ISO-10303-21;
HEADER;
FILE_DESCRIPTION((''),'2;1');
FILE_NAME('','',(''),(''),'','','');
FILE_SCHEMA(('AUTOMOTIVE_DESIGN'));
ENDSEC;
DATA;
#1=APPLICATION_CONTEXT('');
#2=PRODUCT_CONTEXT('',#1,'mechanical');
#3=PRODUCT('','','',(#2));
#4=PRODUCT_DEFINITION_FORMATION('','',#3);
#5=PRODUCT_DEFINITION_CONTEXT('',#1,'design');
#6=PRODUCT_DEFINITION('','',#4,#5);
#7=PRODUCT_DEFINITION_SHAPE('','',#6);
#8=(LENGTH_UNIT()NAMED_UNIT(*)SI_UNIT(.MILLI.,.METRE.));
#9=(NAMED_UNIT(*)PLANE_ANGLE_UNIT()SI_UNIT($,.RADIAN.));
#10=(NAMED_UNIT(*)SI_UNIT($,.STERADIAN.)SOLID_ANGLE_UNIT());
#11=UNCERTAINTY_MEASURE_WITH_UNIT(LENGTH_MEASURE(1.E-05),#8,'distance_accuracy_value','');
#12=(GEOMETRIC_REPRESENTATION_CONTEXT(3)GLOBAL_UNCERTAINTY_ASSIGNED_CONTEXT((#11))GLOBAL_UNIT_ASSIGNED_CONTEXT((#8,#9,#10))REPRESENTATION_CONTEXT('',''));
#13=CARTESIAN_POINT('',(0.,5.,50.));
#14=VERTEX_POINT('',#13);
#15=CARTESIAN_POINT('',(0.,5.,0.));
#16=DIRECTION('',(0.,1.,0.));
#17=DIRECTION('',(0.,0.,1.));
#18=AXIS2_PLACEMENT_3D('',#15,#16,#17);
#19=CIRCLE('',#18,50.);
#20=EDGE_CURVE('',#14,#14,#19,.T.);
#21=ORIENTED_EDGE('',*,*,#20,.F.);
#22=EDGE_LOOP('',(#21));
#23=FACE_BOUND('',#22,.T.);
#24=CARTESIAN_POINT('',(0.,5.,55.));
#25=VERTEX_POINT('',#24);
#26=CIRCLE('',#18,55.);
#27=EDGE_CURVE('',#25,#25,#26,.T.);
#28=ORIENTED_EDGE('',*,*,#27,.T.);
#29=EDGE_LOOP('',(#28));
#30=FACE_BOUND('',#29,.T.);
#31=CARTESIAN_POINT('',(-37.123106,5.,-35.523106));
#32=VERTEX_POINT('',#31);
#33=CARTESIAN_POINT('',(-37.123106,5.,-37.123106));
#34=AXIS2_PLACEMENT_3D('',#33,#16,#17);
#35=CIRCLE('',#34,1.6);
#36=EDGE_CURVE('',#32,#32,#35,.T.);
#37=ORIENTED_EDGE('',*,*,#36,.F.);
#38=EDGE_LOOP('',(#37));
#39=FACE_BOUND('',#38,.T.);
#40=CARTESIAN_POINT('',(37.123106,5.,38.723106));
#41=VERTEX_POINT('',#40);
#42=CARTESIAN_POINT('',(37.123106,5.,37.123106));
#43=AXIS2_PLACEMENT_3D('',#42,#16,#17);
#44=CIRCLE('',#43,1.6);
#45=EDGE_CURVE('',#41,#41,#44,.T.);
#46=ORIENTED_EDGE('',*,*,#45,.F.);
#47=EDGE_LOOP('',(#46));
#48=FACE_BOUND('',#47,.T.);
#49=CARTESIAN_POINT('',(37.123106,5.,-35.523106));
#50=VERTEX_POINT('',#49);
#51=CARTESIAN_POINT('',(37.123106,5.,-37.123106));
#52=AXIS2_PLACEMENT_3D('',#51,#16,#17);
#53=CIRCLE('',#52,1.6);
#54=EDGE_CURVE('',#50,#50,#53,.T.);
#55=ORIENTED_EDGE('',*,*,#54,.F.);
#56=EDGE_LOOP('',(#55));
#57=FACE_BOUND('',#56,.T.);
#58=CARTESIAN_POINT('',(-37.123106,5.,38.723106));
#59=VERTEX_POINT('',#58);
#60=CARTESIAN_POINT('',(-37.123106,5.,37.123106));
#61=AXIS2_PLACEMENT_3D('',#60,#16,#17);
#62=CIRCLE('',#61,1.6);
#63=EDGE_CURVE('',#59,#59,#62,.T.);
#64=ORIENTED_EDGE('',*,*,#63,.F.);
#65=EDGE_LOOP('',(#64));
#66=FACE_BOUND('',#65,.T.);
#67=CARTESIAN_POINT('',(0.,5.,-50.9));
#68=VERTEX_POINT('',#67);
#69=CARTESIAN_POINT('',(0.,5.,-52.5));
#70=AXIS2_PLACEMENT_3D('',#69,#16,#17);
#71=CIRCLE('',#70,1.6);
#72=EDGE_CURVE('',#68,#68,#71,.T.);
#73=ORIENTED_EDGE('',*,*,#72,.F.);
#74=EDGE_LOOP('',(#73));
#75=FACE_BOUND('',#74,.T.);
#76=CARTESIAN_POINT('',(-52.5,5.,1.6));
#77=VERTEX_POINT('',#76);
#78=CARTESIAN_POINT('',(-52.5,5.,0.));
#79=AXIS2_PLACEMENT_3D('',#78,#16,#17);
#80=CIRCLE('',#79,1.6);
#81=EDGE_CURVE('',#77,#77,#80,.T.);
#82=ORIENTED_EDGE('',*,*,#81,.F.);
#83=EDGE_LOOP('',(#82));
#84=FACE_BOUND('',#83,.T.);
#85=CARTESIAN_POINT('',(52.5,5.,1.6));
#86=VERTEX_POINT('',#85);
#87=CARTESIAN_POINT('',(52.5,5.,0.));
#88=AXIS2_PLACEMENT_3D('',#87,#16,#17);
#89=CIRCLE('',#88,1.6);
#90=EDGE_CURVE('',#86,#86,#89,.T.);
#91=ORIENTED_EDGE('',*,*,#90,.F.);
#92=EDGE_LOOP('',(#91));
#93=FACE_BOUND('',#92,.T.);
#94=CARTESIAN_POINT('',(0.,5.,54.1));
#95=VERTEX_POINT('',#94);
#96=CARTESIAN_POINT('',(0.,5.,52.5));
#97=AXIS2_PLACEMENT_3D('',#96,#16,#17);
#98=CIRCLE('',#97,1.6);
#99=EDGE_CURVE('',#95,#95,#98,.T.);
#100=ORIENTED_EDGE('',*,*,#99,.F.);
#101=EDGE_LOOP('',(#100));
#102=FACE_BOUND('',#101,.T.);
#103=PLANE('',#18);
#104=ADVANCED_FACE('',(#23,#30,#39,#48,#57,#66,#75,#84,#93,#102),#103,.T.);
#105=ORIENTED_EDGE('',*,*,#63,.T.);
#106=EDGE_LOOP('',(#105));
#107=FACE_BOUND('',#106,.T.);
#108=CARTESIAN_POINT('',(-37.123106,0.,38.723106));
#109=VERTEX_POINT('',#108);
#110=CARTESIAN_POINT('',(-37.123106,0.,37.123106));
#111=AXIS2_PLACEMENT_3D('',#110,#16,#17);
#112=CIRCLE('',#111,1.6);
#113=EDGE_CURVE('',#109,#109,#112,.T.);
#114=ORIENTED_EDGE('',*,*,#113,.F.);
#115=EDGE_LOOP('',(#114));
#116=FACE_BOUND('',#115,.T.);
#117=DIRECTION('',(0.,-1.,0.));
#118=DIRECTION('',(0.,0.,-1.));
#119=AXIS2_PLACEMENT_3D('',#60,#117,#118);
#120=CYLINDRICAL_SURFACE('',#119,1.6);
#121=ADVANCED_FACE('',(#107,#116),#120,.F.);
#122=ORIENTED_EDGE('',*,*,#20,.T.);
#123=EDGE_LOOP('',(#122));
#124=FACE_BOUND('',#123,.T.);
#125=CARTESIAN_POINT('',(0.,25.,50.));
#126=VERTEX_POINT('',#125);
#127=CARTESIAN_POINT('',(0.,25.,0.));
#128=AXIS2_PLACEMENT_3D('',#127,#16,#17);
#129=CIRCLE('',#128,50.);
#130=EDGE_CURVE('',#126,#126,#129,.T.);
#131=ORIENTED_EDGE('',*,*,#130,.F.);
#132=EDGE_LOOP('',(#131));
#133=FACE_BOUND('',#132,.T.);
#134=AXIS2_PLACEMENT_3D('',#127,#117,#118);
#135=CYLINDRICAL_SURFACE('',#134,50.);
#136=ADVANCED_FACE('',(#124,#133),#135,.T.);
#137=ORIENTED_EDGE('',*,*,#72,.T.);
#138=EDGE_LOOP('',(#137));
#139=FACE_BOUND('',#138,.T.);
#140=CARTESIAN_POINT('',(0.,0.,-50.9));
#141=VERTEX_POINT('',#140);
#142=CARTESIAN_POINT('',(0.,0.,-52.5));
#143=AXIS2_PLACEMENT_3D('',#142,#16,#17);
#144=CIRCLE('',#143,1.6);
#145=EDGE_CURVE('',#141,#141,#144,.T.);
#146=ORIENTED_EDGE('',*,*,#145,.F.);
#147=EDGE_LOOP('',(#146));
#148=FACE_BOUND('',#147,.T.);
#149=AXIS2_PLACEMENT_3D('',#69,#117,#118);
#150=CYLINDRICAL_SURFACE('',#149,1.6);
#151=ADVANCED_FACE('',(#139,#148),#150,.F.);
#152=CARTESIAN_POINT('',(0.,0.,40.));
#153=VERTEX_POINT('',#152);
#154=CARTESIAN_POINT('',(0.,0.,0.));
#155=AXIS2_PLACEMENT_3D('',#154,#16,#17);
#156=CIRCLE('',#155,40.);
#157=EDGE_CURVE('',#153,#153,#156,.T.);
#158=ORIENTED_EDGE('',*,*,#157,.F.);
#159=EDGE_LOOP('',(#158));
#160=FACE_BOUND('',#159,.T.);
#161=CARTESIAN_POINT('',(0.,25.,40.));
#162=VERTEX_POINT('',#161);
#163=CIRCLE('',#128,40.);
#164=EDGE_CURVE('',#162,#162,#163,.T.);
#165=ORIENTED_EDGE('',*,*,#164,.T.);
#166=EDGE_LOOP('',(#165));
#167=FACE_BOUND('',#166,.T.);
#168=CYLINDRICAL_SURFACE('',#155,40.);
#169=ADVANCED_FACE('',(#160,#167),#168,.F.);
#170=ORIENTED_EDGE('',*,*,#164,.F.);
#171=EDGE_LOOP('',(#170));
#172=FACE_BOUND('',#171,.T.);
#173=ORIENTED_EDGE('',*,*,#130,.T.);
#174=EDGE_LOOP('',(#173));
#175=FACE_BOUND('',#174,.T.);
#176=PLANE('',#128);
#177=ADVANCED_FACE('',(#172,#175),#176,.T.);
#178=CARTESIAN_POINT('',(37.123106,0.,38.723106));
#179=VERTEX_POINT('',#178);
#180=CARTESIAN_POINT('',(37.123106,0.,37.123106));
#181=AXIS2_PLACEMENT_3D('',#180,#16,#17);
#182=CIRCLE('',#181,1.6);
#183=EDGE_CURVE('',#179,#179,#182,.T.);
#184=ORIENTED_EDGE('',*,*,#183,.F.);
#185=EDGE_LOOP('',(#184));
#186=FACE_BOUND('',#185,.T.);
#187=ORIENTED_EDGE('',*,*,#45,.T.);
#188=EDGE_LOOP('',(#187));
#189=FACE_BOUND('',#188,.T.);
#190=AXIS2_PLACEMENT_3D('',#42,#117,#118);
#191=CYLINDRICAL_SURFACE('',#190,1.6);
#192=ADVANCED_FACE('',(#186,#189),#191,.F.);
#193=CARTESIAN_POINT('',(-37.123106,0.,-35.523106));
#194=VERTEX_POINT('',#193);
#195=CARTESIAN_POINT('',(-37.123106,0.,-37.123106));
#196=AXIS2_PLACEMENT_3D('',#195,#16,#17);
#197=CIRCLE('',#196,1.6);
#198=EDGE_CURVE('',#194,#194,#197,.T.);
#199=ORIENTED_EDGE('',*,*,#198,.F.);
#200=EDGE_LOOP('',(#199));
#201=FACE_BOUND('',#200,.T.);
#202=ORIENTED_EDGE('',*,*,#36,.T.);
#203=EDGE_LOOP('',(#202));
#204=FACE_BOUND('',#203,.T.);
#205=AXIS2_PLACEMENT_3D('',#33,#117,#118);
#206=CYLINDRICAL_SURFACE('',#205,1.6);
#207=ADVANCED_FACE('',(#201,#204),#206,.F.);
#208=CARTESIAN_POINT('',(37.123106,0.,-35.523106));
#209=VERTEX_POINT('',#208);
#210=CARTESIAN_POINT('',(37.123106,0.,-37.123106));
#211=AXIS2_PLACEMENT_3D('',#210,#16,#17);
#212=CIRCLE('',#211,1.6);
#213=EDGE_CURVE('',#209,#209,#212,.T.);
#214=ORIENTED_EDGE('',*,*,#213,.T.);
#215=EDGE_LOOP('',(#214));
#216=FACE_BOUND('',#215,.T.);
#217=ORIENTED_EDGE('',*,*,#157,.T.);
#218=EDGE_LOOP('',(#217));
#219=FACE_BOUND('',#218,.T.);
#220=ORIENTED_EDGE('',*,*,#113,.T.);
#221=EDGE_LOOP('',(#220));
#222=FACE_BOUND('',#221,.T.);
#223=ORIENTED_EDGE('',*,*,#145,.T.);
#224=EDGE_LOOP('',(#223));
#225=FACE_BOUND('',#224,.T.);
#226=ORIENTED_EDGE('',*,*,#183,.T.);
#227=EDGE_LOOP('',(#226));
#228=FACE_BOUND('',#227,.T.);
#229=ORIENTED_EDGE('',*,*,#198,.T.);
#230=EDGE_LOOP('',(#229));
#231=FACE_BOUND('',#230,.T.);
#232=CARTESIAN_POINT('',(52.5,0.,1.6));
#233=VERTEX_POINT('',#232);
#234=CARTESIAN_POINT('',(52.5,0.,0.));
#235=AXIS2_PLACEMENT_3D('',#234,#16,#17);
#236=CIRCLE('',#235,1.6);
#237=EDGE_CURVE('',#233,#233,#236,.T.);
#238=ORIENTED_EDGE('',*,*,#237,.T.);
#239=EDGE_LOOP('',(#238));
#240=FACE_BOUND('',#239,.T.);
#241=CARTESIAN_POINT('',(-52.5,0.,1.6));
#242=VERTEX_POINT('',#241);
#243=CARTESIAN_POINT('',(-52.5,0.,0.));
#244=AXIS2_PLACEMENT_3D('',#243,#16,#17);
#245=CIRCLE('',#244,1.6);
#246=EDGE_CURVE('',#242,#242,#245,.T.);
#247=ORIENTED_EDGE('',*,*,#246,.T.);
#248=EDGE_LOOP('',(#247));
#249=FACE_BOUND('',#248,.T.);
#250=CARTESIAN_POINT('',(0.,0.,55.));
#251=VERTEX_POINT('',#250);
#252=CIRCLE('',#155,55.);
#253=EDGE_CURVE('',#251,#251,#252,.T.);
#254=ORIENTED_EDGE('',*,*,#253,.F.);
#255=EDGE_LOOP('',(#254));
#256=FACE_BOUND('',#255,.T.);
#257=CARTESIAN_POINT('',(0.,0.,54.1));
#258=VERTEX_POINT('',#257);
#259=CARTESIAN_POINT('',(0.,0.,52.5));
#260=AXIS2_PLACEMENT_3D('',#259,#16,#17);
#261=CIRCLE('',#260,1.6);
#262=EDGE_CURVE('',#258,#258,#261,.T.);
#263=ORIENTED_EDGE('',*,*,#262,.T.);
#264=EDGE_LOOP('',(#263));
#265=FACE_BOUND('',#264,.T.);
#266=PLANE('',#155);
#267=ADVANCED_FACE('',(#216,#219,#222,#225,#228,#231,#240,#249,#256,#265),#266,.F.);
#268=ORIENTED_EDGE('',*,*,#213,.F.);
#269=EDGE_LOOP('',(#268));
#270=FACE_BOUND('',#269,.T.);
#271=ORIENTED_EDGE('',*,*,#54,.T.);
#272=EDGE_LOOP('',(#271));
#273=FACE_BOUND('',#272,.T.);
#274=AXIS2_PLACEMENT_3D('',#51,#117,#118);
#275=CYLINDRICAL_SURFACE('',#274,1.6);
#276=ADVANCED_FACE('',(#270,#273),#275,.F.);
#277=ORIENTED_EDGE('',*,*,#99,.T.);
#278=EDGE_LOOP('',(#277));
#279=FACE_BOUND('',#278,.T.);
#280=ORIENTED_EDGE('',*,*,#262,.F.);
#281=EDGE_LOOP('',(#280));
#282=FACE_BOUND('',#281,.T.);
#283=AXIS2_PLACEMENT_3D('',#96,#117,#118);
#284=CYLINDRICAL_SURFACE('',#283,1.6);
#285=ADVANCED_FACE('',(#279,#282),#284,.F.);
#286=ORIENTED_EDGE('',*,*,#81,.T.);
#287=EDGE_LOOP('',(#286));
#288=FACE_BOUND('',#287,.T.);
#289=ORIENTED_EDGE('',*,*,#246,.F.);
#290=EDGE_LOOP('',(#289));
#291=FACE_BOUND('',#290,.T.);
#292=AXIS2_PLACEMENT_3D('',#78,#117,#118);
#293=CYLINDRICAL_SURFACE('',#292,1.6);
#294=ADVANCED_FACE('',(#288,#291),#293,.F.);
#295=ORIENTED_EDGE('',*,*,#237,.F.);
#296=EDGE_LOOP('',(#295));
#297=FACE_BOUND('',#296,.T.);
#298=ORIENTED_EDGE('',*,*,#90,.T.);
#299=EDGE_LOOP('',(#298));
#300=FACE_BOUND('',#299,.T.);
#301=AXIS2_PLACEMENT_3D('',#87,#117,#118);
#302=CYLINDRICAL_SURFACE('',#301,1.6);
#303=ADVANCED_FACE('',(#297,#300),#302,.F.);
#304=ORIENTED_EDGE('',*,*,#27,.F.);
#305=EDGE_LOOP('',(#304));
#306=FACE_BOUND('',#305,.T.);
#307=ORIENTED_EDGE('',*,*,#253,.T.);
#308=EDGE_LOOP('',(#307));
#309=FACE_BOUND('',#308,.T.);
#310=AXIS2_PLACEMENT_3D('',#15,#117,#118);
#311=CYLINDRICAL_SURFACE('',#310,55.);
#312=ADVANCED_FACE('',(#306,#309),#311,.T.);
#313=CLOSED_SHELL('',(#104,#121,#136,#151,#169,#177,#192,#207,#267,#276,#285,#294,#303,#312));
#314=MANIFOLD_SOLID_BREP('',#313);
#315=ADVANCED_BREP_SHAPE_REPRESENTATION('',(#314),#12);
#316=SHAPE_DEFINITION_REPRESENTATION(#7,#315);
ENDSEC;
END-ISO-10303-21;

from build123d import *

# Parameters (mm, degrees)
BOSS_EXTRUDE1_OUTLINE_R   = 55
BOSS_EXTRUDE1_OUTLINE_R_2 = 1.6
BOSS_EXTRUDE1_DEPTH       = 5
SKETCH2_R                 = 50
BOSS_EXTRUDE2_DEPTH       = 20
SKETCH3_R                 = 40
CUT_EXTRUDE1_DEPTH        = 82.700673192


# Read off the part's stored shape, not the designer's step: Boss-Extrude1
with BuildPart() as part:
    # Boss-Extrude1 outline → Boss-Extrude1 (new body)
    with BuildSketch(Plane(origin=(0, 0, 0), x_dir=(1, 0, 0), z_dir=(0, 1, 0))):
        Circle(BOSS_EXTRUDE1_OUTLINE_R)
        with Locations((-37.123106012, -37.123106012)):
            Circle(BOSS_EXTRUDE1_OUTLINE_R_2, mode=Mode.SUBTRACT)
        with Locations((0, -52.5)):
            Circle(BOSS_EXTRUDE1_OUTLINE_R_2, mode=Mode.SUBTRACT)
        with Locations((37.123106012, -37.123106012)):
            Circle(BOSS_EXTRUDE1_OUTLINE_R_2, mode=Mode.SUBTRACT)
        with Locations((-52.5, 0)):
            Circle(BOSS_EXTRUDE1_OUTLINE_R_2, mode=Mode.SUBTRACT)
        with Locations((-37.123106012, 37.123106012)):
            Circle(BOSS_EXTRUDE1_OUTLINE_R_2, mode=Mode.SUBTRACT)
        with Locations((52.5, 0)):
            Circle(BOSS_EXTRUDE1_OUTLINE_R_2, mode=Mode.SUBTRACT)
        with Locations((0, 52.5)):
            Circle(BOSS_EXTRUDE1_OUTLINE_R_2, mode=Mode.SUBTRACT)
        with Locations((37.123106012, 37.123106012)):
            Circle(BOSS_EXTRUDE1_OUTLINE_R_2, mode=Mode.SUBTRACT)
    extrude(amount=BOSS_EXTRUDE1_DEPTH)

    # Sketch2 → Boss-Extrude2 (add)
    with BuildSketch(Plane(origin=(0, 5, 0), x_dir=(1, 0, 0), z_dir=(0, 1, 0))):
        with Locations(Location((0, 0, 0), (0, 0, 270))):
            Circle(SKETCH2_R)
    extrude(amount=BOSS_EXTRUDE2_DEPTH)

    # Sketch3 → Cut-Extrude1 (cut, through all)
    with BuildSketch(Plane(origin=(0, 25, 0), x_dir=(1, 0, 0), z_dir=(0, 1, 0))):
        with Locations(Location((0, 0, 0), (0, 0, 270))):
            Circle(SKETCH3_R)
    extrude(amount=-CUT_EXTRUDE1_DEPTH, mode=Mode.SUBTRACT)


solid = part.part
